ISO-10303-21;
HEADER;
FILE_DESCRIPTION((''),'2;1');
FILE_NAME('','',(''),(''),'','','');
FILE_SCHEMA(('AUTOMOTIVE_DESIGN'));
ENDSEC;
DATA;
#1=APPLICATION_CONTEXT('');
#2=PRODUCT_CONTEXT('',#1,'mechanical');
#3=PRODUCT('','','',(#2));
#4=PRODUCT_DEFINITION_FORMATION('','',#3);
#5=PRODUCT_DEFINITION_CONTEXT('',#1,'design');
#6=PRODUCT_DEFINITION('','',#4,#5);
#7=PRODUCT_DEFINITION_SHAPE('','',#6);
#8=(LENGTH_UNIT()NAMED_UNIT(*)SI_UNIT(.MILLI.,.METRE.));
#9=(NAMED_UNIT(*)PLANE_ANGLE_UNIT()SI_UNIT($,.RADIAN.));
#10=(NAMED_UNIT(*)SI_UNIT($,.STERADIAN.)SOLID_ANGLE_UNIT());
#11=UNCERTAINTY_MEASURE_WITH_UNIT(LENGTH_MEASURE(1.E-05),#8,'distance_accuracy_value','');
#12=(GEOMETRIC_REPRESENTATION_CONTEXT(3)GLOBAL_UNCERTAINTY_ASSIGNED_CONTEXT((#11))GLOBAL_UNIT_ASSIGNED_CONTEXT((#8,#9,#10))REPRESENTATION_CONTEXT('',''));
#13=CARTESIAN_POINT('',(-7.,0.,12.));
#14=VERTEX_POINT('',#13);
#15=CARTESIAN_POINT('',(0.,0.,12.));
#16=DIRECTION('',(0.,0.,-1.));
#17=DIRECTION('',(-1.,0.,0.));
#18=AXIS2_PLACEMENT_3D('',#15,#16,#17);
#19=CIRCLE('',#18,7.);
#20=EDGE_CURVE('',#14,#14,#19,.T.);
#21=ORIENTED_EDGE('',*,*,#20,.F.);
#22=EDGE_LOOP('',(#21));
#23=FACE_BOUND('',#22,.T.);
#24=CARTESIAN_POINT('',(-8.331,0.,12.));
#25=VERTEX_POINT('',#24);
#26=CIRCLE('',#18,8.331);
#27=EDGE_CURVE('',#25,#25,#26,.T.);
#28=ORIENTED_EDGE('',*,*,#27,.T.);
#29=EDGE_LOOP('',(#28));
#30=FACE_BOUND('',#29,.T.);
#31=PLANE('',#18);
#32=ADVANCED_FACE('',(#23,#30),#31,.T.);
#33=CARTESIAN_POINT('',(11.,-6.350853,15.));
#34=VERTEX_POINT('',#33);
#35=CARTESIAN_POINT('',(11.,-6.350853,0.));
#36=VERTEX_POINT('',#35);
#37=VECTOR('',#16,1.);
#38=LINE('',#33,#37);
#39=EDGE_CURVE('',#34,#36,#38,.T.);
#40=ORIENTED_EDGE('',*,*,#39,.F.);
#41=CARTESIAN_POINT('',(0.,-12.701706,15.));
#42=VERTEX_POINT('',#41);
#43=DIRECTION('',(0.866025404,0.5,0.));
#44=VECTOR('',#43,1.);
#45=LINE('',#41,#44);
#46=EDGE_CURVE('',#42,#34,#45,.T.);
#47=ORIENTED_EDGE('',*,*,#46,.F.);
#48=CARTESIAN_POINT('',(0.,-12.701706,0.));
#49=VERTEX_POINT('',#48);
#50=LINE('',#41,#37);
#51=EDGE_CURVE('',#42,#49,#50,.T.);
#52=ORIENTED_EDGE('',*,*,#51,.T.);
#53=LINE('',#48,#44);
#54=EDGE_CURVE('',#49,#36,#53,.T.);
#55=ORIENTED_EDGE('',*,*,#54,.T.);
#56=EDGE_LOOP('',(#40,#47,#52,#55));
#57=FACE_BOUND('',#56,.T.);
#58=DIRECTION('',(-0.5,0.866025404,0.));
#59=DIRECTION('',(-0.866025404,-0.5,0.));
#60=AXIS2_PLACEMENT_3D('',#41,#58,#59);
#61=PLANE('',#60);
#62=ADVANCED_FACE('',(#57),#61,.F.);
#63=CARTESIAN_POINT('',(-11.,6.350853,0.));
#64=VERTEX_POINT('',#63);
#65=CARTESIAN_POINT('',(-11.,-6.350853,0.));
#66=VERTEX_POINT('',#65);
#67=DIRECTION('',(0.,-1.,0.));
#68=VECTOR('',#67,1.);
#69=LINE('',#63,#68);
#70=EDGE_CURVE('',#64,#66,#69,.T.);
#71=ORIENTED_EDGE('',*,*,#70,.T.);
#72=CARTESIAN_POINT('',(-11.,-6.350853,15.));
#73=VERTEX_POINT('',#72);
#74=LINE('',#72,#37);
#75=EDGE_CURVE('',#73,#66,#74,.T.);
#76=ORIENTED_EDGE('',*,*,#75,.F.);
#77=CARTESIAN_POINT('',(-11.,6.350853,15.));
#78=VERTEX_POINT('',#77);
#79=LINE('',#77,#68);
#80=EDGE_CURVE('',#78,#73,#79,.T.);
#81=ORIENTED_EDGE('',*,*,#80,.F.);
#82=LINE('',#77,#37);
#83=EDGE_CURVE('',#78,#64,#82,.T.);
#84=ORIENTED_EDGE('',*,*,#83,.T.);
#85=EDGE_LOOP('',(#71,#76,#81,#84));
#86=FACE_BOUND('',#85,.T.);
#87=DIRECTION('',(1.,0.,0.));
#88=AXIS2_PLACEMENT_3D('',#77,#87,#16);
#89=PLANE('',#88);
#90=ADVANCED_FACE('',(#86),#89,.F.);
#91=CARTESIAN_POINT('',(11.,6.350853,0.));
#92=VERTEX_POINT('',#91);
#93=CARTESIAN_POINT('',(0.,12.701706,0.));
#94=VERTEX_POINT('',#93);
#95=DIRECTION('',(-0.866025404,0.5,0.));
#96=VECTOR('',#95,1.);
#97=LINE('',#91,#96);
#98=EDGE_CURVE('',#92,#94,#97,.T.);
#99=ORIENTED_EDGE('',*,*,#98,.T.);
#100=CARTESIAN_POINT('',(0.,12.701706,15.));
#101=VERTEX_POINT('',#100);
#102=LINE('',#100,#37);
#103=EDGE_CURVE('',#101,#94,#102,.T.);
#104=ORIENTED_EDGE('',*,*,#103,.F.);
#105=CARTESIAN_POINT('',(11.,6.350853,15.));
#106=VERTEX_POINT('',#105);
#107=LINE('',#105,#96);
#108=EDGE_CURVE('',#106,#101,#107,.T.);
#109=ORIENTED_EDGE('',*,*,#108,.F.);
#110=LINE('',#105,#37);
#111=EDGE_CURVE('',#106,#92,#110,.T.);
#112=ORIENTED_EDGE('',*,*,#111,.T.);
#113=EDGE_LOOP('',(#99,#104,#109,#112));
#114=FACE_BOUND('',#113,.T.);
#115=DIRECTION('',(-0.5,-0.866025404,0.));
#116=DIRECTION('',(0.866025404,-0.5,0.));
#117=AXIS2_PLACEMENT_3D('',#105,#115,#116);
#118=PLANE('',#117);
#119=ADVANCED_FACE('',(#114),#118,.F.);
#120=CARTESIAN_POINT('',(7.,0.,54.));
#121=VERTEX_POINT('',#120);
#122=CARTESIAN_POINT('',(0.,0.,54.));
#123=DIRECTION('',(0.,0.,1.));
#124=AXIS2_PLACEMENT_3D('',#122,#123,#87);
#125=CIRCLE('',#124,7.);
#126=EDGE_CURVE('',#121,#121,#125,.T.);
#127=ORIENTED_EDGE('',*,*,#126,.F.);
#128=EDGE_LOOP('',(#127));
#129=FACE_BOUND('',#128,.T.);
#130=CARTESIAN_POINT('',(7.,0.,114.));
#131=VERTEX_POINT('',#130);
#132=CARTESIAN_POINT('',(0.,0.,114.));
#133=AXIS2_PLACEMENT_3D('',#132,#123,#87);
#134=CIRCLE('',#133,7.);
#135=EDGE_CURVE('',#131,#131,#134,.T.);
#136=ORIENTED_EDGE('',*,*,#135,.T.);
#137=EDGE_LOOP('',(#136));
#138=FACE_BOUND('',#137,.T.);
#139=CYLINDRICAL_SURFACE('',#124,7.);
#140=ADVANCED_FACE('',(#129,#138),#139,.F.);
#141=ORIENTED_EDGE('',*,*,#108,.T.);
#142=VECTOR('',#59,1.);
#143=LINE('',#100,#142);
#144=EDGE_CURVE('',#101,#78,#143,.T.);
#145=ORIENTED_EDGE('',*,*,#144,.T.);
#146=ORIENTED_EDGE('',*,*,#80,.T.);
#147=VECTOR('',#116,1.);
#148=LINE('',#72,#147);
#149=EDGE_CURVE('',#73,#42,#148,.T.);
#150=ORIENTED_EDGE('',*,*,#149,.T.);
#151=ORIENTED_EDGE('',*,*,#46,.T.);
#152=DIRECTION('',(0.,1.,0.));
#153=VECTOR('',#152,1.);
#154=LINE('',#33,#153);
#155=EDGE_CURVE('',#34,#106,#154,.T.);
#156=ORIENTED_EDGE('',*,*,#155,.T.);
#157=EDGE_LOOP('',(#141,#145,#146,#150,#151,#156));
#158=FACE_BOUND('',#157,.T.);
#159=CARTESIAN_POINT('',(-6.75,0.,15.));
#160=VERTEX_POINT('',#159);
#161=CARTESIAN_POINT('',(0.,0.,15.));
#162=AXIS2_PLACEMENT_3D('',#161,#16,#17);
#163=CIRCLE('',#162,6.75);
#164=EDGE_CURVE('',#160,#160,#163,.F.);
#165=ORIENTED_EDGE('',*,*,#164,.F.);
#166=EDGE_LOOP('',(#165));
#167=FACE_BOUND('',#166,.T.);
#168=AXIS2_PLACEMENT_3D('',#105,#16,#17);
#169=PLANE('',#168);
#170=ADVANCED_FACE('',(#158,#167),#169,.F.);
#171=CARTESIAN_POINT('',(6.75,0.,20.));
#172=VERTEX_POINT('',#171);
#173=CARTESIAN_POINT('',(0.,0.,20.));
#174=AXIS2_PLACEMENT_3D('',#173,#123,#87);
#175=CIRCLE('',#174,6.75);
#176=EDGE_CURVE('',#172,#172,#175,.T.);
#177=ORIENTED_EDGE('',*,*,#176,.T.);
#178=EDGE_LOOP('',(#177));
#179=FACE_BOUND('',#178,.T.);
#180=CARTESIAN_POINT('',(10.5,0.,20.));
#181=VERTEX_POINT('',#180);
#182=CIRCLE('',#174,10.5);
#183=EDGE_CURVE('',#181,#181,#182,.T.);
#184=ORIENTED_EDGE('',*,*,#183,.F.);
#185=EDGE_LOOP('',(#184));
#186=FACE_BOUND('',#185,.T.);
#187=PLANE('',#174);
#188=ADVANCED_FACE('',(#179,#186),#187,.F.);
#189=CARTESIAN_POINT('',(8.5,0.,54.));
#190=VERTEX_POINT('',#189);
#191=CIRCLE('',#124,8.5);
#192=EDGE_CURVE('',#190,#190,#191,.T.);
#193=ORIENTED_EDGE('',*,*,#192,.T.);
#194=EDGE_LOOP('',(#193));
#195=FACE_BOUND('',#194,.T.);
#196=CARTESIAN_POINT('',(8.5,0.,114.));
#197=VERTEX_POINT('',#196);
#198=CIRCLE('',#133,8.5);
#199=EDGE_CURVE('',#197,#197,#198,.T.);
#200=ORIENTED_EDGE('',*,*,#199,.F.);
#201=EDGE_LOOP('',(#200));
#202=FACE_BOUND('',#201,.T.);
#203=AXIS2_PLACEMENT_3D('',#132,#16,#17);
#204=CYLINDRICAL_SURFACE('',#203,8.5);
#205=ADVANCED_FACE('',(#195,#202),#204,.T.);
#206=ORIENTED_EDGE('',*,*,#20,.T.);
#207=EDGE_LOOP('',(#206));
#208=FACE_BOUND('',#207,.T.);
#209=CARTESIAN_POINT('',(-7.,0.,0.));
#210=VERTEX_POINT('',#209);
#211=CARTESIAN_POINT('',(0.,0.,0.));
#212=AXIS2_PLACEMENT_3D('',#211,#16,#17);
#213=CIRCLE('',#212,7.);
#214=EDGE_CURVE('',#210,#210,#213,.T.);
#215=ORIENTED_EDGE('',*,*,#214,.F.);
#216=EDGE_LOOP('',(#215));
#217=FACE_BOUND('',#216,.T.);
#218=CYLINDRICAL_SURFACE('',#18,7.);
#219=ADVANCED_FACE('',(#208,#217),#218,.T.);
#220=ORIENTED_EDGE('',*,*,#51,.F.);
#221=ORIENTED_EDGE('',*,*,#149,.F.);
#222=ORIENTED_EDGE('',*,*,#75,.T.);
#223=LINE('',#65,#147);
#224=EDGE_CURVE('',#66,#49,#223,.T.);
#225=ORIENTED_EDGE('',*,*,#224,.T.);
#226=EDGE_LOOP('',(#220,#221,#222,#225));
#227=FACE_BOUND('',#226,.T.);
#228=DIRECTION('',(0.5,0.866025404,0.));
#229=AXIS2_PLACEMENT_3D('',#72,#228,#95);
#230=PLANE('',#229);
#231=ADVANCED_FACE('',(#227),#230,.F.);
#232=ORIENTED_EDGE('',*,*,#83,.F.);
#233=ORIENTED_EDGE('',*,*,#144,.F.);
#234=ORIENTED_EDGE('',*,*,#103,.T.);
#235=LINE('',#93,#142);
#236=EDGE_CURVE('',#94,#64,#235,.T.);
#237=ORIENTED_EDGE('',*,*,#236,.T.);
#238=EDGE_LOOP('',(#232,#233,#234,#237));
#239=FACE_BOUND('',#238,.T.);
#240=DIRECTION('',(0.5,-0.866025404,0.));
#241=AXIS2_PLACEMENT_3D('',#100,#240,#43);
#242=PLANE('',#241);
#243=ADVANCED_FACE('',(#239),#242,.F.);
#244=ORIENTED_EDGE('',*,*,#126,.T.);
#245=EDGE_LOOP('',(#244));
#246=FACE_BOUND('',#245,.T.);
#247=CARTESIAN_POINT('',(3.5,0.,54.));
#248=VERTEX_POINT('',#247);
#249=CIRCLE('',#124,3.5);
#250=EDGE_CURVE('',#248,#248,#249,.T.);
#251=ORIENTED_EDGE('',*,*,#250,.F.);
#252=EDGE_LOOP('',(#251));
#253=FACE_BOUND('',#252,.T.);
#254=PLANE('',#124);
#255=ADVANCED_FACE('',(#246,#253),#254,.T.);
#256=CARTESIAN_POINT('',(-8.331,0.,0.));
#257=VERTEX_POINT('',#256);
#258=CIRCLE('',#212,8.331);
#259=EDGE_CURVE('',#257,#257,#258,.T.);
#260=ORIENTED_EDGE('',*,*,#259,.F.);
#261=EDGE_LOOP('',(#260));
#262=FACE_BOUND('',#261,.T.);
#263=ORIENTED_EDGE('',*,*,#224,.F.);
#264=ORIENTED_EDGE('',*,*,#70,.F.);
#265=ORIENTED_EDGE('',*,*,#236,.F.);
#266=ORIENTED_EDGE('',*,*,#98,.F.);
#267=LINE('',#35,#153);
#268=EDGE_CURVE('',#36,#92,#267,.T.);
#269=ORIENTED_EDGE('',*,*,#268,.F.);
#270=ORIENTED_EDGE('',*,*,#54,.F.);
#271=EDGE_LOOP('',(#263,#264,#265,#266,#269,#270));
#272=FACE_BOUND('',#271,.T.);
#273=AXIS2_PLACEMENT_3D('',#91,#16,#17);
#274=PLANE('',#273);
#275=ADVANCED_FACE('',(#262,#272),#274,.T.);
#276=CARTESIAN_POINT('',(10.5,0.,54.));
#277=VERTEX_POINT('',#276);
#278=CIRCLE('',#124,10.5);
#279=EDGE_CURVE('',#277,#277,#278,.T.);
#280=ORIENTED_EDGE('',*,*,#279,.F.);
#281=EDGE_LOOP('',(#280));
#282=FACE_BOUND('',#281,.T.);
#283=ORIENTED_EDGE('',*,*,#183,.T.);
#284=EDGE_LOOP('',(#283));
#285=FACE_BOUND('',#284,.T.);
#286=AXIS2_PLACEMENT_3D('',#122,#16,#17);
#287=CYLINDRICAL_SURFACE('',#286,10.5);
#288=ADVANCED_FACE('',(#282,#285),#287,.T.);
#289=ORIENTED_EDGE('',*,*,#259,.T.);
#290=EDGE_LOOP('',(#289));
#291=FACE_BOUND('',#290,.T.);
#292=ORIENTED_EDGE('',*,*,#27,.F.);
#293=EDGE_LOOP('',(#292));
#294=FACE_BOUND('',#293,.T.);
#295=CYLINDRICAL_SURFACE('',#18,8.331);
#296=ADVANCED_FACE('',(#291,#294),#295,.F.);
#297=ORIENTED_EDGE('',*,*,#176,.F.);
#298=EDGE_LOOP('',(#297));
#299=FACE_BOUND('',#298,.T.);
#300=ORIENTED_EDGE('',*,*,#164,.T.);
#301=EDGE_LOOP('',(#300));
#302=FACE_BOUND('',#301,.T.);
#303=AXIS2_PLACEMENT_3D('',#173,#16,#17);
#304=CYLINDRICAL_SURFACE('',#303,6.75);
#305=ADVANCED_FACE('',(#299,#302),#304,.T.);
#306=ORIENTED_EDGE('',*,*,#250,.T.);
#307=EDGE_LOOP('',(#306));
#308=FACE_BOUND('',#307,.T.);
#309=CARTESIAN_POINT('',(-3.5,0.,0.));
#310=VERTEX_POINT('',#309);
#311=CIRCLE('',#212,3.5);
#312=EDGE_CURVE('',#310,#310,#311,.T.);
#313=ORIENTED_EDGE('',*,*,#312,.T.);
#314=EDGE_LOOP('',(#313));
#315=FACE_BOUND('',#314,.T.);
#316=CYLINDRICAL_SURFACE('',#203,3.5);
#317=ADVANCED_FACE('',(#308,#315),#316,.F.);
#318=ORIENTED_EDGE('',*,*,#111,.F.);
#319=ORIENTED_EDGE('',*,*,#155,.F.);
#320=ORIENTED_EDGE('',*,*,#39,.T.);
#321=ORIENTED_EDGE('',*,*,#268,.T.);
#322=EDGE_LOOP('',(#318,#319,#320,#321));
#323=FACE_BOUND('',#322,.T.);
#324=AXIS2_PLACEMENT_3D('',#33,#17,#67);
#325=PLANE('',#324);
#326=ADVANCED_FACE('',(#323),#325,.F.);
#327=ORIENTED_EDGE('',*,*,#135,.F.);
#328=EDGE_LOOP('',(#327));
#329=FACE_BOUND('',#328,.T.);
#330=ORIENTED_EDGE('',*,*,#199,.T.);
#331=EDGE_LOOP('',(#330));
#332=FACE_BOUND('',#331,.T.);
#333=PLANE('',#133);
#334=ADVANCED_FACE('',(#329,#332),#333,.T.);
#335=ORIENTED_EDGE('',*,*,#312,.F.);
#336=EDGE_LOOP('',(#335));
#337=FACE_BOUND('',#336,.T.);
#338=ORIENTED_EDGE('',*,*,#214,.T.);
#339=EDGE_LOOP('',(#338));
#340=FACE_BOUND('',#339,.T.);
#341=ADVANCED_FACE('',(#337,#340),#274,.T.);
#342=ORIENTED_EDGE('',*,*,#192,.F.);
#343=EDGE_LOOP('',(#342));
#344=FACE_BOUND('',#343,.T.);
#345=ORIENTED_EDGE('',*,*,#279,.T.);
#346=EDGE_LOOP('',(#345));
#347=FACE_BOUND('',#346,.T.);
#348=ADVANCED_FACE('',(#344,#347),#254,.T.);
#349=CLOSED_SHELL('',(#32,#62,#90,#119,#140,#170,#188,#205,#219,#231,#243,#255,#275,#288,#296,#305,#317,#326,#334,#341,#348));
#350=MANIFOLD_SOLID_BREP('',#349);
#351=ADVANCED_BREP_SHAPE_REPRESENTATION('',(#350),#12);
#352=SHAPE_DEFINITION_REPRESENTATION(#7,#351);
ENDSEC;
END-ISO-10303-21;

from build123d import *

# Parameters (mm, degrees)
BASE_EXTRUDE_DEPTH      = 15
SKETCH2_R               = 8.331
SKETCH2_R_2             = 7
CUT_EXTRUDE1_DEPTH      = 12
SKETCH4_R               = 6.75
BOSS_EXTRUDE1_DEPTH     = 5
BOSS_EXTRUDE2_START     = 20
BOSS_EXTRUDE2_OUTLINE_R = 10.5
BOSS_EXTRUDE2_DEPTH     = 34
SKETCH6_R               = 8.5
BOSS_EXTRUDE3_DEPTH     = 60
CUT_EXTRUDE3_START      = -60
SKETCH7_R               = 7
CUT_EXTRUDE3_DEPTH      = 60
SKETCH3_R               = 3.5
CUT_EXTRUDE2_DEPTH      = 116.231650745


# Read off the part's stored shape, not the designer's step: Boss-Extrude2
with BuildPart() as part:
    # Sketch1 → Base-Extrude (new body)
    with BuildSketch(Plane.XY):
        Polygon((0, 12.701705922), (-11, 6.350852961), (-11, -6.350852961), (0, -12.701705922), (11, -6.350852961), (11, 6.350852961), align=None)
    extrude(amount=BASE_EXTRUDE_DEPTH)

    # Sketch2 → Cut-Extrude1 (cut)
    with BuildSketch(Plane(origin=(0, 0, 0), x_dir=(-1, 0, 0), z_dir=(0, 0, -1))):
        Circle(SKETCH2_R)
        Circle(SKETCH2_R_2, mode=Mode.SUBTRACT)
    extrude(amount=-CUT_EXTRUDE1_DEPTH, mode=Mode.SUBTRACT)

    # Sketch4 → Boss-Extrude1 (add)
    with BuildSketch(Plane.XY.offset(15)):
        with Locations(Location((0, 0, 0), (0, 0, 180))):
            Circle(SKETCH4_R)
    extrude(amount=BOSS_EXTRUDE1_DEPTH)

    # Boss-Extrude2 outline → Boss-Extrude2 (add)
    with BuildSketch(Plane.XY.offset(BOSS_EXTRUDE2_START)):
        Circle(BOSS_EXTRUDE2_OUTLINE_R)
    extrude(amount=BOSS_EXTRUDE2_DEPTH)

    # Sketch6 → Boss-Extrude3 (add)
    with BuildSketch(Plane.XY.offset(54)):
        Circle(SKETCH6_R)
    extrude(amount=BOSS_EXTRUDE3_DEPTH)

    # Sketch7 → Cut-Extrude3 (cut)
    with BuildSketch(Plane.XY.offset(114).offset(CUT_EXTRUDE3_START)):
        with Locations(Location((0, 0, 0), (0, 0, 180))):
            Circle(SKETCH7_R)
    extrude(amount=CUT_EXTRUDE3_DEPTH, mode=Mode.SUBTRACT)

    # Sketch3 → Cut-Extrude2 (cut, through all)
    with BuildSketch(Plane(origin=(0, 0, 0), x_dir=(-1, 0, 0), z_dir=(0, 0, -1))):
        Circle(SKETCH3_R)
    extrude(amount=-CUT_EXTRUDE2_DEPTH, mode=Mode.SUBTRACT)


solid = part.part
